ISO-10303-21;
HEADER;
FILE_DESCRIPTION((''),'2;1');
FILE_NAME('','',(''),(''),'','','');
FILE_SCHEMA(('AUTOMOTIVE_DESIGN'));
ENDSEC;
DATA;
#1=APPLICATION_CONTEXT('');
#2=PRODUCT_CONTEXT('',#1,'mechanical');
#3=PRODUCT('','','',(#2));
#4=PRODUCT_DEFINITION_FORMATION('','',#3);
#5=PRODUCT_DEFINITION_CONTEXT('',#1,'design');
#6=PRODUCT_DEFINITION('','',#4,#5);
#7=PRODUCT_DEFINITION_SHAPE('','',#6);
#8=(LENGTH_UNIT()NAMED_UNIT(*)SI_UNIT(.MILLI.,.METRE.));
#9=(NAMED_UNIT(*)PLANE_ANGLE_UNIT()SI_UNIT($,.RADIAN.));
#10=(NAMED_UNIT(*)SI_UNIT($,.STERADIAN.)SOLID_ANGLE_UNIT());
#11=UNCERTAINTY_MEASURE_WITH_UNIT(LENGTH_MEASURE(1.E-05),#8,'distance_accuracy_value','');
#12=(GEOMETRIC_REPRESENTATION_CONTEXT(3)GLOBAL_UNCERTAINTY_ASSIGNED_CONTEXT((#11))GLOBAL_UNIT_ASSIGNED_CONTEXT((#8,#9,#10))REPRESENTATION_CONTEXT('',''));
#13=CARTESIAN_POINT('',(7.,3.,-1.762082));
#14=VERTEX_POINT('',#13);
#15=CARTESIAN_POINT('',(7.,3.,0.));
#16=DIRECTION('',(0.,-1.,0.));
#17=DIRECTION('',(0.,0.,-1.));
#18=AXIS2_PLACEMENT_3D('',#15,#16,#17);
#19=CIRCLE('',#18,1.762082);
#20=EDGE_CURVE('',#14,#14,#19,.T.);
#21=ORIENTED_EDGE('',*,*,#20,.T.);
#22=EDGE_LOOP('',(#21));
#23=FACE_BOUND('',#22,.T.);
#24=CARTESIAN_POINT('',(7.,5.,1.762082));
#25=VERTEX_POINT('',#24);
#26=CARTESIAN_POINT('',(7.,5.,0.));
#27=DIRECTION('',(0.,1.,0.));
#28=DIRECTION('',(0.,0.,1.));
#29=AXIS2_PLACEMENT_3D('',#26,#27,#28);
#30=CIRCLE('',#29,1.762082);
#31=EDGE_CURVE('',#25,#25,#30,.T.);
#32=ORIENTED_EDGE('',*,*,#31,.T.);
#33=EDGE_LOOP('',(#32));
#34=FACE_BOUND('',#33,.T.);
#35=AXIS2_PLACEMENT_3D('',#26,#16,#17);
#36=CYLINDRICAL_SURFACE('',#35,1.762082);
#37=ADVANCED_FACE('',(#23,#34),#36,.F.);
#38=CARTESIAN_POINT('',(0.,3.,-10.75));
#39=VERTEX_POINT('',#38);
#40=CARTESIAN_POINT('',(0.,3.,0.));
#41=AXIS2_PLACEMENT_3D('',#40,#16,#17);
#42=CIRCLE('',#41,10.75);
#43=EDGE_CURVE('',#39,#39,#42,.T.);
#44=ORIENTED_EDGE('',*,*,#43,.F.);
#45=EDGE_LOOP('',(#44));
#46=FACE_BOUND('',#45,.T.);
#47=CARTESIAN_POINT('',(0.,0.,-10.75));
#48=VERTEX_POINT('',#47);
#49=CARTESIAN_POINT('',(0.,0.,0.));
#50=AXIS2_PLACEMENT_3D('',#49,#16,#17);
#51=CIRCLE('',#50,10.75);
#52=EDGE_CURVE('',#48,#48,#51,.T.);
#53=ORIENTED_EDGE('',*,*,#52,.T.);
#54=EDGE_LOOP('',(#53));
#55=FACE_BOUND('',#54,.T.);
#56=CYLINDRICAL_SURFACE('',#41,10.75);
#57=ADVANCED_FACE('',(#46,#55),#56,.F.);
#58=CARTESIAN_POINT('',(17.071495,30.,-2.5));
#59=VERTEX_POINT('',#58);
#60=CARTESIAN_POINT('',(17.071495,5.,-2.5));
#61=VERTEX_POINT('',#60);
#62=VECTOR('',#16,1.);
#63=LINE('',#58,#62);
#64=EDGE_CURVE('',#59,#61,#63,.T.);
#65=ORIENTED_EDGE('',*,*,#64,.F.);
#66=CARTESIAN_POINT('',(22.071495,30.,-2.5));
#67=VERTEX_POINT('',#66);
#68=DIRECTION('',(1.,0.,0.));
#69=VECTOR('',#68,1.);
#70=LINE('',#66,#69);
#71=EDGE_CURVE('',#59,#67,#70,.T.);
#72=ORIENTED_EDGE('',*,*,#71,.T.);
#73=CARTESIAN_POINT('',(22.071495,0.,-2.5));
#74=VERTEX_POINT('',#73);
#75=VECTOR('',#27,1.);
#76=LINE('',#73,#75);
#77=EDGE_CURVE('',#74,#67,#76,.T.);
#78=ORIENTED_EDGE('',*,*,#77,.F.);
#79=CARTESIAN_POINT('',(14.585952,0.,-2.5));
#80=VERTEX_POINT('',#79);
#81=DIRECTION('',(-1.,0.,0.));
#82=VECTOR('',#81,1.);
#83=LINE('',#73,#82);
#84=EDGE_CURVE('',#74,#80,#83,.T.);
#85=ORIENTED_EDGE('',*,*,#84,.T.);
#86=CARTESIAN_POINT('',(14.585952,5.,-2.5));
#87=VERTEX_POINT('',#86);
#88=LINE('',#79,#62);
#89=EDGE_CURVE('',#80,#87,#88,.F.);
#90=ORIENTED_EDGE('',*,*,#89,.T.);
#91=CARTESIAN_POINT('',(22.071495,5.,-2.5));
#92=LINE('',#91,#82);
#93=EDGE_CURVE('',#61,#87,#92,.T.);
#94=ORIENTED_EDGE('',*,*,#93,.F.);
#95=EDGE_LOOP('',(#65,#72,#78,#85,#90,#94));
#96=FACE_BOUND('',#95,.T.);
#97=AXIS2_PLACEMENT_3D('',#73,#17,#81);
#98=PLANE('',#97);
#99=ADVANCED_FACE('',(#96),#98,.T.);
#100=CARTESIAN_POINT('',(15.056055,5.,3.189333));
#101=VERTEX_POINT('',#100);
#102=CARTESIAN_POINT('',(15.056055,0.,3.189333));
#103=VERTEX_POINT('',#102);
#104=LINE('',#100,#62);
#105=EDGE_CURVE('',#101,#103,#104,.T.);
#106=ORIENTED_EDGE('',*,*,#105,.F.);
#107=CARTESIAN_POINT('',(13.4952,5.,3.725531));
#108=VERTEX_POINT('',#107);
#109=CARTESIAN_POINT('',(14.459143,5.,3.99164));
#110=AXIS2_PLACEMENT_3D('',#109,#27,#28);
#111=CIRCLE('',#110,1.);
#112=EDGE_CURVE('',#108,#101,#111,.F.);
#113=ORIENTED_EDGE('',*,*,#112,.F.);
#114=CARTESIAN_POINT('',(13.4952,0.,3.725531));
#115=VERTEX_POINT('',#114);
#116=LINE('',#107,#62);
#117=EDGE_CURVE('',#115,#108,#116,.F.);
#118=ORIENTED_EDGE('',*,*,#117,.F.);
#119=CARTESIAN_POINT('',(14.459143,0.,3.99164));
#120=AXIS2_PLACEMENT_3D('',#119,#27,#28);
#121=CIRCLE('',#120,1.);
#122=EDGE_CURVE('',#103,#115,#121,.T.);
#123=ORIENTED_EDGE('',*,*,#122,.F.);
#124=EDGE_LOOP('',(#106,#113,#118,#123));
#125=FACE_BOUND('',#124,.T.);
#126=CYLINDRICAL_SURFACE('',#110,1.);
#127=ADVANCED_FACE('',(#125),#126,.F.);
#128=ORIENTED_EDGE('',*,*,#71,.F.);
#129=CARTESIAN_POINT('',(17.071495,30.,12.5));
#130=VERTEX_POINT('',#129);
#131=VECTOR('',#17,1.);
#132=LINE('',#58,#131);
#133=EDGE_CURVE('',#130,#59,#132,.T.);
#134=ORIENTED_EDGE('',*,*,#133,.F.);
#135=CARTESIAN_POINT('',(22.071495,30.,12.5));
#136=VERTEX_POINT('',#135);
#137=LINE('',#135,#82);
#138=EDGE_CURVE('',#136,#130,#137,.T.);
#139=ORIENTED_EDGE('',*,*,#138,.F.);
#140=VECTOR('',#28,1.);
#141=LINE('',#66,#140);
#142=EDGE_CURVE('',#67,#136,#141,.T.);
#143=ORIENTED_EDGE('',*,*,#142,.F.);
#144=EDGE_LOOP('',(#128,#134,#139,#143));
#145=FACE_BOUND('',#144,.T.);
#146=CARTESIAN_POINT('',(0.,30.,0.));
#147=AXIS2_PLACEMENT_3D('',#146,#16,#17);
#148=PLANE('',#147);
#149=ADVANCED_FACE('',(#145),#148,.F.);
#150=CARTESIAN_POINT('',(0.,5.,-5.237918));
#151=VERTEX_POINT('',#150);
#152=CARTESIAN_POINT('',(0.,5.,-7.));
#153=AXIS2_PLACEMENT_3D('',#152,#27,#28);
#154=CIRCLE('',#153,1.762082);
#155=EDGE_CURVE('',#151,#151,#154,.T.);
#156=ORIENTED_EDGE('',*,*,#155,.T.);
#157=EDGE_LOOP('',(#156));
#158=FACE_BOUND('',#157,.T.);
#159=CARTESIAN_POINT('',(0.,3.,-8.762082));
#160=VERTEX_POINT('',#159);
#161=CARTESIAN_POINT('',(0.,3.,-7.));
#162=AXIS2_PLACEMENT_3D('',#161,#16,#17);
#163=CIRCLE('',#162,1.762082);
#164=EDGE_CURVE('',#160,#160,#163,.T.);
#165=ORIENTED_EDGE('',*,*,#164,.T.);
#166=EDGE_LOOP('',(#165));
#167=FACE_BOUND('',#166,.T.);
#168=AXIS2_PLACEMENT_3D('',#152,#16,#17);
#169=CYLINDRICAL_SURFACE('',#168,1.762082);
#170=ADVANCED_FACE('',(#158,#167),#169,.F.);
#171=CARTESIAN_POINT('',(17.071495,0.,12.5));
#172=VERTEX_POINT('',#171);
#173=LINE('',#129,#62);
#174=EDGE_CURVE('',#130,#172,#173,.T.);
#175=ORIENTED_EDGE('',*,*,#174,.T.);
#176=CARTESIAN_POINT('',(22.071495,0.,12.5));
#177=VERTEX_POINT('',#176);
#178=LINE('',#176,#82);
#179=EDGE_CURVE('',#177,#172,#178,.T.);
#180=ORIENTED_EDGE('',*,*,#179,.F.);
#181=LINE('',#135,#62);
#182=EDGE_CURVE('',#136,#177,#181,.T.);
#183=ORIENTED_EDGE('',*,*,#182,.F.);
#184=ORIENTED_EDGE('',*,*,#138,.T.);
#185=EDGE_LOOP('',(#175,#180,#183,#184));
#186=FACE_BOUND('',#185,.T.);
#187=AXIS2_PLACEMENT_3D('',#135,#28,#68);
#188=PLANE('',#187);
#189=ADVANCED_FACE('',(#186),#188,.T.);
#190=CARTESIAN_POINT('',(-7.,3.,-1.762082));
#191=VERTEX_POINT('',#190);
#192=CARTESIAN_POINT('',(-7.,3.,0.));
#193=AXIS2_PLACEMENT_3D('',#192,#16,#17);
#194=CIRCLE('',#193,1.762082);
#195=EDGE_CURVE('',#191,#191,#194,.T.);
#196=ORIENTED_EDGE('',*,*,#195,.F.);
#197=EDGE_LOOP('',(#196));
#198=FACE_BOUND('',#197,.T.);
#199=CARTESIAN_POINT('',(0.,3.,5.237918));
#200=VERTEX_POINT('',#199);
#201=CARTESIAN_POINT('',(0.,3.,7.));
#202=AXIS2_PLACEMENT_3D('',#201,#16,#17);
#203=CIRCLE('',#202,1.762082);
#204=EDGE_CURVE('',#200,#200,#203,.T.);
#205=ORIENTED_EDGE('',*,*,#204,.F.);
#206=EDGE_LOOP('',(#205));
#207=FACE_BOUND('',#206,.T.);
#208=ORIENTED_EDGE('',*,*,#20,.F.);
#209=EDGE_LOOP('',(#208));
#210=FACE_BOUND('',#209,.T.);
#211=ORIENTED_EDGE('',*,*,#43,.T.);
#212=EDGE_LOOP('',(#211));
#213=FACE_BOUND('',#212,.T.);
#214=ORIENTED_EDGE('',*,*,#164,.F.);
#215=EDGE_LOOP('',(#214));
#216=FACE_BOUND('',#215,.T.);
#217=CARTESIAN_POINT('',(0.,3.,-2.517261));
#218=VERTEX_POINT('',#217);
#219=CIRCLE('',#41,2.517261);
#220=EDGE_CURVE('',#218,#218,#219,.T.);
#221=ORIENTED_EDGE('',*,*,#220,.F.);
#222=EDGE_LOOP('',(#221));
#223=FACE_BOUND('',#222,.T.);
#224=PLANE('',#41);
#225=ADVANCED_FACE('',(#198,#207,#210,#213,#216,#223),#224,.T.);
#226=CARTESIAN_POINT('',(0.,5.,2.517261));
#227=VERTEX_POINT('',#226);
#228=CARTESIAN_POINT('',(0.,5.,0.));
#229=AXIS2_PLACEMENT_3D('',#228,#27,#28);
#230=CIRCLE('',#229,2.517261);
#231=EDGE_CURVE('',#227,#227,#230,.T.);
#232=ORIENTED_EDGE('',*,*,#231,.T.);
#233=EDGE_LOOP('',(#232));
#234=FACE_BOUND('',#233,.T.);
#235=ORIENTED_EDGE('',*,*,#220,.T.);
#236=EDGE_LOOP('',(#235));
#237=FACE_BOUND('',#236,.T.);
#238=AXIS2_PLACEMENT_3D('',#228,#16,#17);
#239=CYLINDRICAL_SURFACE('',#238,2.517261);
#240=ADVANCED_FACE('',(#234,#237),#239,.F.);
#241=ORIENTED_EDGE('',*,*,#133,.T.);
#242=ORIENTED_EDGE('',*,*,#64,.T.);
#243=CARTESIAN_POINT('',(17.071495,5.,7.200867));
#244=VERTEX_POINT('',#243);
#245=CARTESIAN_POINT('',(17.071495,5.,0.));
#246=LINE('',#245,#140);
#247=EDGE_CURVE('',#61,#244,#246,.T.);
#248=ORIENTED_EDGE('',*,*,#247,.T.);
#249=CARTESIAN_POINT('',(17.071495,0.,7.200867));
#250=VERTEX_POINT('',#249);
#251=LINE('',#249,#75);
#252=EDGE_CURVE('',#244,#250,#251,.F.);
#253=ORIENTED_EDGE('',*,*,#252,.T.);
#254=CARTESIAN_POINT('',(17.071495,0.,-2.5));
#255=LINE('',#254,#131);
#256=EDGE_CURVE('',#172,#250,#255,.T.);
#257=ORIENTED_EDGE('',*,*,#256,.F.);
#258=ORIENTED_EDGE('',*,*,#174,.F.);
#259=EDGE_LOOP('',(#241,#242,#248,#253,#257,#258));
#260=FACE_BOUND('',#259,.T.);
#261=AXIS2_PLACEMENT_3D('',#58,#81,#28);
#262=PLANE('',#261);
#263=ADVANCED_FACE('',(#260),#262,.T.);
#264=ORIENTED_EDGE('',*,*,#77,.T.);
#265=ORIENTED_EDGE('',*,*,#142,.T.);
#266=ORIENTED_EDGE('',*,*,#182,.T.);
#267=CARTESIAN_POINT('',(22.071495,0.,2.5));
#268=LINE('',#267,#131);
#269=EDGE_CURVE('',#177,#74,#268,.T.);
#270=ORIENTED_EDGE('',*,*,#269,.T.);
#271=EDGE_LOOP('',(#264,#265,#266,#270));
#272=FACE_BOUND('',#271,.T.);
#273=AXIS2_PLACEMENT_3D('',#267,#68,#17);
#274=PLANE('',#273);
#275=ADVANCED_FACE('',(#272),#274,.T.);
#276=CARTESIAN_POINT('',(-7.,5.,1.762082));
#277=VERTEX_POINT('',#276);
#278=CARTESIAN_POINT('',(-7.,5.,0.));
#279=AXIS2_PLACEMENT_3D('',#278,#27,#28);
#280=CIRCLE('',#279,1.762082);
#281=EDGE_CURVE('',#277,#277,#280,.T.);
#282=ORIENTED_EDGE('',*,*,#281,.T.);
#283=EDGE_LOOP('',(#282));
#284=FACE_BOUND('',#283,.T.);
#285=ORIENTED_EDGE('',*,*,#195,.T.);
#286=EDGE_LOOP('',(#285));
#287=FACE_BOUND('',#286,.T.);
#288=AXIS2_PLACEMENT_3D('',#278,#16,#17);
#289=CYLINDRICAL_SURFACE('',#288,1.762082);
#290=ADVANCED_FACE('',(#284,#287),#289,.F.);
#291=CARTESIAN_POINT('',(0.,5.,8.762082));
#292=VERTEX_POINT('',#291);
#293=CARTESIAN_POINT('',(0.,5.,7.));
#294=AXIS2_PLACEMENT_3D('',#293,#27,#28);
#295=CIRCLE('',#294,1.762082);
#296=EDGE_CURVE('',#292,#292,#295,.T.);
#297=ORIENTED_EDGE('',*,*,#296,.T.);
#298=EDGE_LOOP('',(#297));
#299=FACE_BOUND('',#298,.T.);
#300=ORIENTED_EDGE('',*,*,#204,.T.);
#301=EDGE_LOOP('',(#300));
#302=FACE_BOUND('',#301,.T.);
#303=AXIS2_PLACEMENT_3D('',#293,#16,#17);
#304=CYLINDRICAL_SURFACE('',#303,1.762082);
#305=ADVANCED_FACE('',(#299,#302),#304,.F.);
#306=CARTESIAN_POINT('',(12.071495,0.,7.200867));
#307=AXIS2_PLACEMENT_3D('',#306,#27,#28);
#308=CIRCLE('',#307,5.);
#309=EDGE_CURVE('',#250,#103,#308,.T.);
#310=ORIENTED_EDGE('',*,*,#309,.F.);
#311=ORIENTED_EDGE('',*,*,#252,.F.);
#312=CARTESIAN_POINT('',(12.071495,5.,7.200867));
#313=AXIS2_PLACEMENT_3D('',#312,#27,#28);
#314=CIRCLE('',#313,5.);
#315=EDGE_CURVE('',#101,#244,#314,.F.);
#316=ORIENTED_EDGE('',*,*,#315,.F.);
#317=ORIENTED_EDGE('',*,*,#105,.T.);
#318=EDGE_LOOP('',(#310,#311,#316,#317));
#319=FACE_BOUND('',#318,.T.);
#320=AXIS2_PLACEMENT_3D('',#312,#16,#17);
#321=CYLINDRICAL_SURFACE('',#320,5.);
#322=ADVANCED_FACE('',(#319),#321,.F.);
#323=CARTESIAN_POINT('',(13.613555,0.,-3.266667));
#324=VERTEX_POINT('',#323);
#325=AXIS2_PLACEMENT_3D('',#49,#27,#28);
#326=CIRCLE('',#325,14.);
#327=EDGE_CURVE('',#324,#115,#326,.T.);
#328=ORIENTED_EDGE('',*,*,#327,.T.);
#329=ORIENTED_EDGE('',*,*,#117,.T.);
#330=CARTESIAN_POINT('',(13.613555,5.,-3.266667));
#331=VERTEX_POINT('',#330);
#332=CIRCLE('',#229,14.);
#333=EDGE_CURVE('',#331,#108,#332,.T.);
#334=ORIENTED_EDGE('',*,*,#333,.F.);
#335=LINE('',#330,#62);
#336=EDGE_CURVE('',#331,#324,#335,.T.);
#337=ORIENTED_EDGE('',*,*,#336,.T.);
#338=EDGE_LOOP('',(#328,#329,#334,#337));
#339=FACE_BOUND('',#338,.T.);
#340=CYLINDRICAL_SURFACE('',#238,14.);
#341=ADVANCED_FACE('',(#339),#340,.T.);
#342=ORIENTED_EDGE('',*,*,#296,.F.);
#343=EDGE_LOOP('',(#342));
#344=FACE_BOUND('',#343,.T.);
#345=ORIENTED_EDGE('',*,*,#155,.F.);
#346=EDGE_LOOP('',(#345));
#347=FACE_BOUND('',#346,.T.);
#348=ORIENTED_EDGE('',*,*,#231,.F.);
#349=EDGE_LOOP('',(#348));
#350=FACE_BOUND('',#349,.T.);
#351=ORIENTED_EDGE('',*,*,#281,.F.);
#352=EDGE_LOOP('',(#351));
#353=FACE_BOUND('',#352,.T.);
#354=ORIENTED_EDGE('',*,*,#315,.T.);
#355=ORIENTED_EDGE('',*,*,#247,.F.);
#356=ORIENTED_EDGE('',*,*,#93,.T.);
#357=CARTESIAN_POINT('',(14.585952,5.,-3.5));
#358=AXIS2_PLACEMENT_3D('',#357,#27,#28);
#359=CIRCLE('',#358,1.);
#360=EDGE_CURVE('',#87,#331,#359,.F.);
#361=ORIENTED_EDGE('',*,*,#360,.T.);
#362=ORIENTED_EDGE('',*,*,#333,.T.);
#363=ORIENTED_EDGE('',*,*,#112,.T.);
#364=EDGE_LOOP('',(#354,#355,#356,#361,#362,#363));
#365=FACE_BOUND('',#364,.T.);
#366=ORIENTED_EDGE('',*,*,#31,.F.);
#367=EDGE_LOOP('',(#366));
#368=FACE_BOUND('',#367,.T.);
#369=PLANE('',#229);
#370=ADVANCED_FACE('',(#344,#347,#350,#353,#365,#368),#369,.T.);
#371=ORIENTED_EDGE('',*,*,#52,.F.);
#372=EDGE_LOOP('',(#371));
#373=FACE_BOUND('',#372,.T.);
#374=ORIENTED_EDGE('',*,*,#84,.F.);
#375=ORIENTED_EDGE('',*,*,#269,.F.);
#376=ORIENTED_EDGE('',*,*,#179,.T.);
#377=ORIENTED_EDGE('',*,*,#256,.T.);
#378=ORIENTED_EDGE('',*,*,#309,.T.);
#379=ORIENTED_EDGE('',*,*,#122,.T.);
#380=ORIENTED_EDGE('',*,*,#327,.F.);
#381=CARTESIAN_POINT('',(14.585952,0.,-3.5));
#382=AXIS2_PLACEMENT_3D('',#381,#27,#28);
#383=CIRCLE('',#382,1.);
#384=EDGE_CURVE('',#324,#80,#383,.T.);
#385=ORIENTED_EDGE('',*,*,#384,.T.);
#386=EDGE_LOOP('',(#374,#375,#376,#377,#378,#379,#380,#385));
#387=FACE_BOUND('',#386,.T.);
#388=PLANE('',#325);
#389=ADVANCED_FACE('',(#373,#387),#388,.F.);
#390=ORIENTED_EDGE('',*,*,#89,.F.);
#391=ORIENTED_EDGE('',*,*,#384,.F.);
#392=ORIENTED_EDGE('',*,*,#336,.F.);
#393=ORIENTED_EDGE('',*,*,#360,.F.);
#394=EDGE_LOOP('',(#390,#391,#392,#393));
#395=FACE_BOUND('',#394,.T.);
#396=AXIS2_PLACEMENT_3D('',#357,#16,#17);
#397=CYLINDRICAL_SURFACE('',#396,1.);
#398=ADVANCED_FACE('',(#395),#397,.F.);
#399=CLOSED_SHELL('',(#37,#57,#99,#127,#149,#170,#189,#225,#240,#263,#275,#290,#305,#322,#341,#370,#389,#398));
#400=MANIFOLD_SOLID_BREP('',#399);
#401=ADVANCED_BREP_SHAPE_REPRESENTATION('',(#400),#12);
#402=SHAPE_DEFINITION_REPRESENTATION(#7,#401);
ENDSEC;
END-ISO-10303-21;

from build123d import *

# Parameters (mm, degrees)
SKETCH1_R           = 14
SKETCH1_R_2         = 2.517260593
SKETCH1_R_3         = 1.762082415
BOSS_EXTRUDE1_DEPTH = 5
SKETCH4_W           = 12
SKETCH4_H           = 5
BOSS_EXTRUDE4_DEPTH = 5
SKETCH6_W           = 5
SKETCH6_H           = 15
BOSS_EXTRUDE5_DEPTH = 30
SKETCH8_R           = 10.75
CUT_EXTRUDE2_DEPTH  = 3
FILLET1_R           = 5
FILLET2_R           = 1


with BuildPart() as part:
    # Sketch1 → Boss-Extrude1 (new body)
    with BuildSketch(Plane(origin=(0, 0, 0), x_dir=(1, 0, 0), z_dir=(0, 1, 0))):
        with Locations(Location((0, 0, 0), (0, 0, 270))):
            Circle(SKETCH1_R)
        with Locations(Location((0, 0, 0), (0, 0, 270))):
            Circle(SKETCH1_R_2, mode=Mode.SUBTRACT)
        with Locations(Location((0, 7, 0), (0, 0, 270))):
            Circle(SKETCH1_R_3, mode=Mode.SUBTRACT)
        with Locations(Location((7, 0, 0), (0, 0, 270))):
            Circle(SKETCH1_R_3, mode=Mode.SUBTRACT)
        with Locations(Location((0, -7, 0), (0, 0, 270))):
            Circle(SKETCH1_R_3, mode=Mode.SUBTRACT)
        with Locations(Location((-7, 0, 0), (0, 0, 270))):
            Circle(SKETCH1_R_3, mode=Mode.SUBTRACT)
    extrude(amount=BOSS_EXTRUDE1_DEPTH)

    # Sketch4 → Boss-Extrude4 (add)
    with BuildSketch(Plane(origin=(0, 5, 0), x_dir=(1, 0, 0), z_dir=(0, 1, 0))):
        with Locations((16.071494653, 0)):
            Rectangle(SKETCH4_W, SKETCH4_H)
    extrude(amount=-BOSS_EXTRUDE4_DEPTH)

    # Sketch6 → Boss-Extrude5 (add)
    with BuildSketch(Plane.XZ):
        with Locations((19.571494653, 5)):
            Rectangle(SKETCH6_W, SKETCH6_H)
    extrude(amount=-BOSS_EXTRUDE5_DEPTH)

    # Sketch8 → Cut-Extrude2 (cut)
    with BuildSketch(Plane.XZ):
        with Locations(Location((0, 0, 0), (0, 0, 270))):
            Circle(SKETCH8_R)
    extrude(amount=-CUT_EXTRUDE2_DEPTH, mode=Mode.SUBTRACT)

    # Fillet1
    # the kernel refuses this fillet: 5 mm, written as the material it adds along each edge
    with BuildSketch(Plane(origin=(17.071494653, 5, 2.5), x_dir=(-1, 0, 0), z_dir=(0, -1, 0))) as fillet1_piece_1:
        with BuildLine():
            CenterArc((5, -4.700866603), FILLET1_R, 109.919316249, 70.080683751)
            Line((0, -4.700866603), (-0.1, -4.700866603))
            Line((-0.1, -4.700866603), (-0.1, 0))
            Line((-0.1, 0), (0, 0.1))
            ThreePointArc((0, 0.1), (1.648258669, 0.1), (3.262447686, 0.094017332))
            Line((3.262447686, 0.094017332), (3.296517339, 0))
        make_face()
    extrude(amount=5)

    # Fillet2
    fillet2_edges = [part.edges().sort_by_distance(p)[0] for p in [
        (13.774977314, 2.5, 2.5),
        (13.774977314, 2.5, -2.5),
    ]]
    fillet(fillet2_edges, radius=FILLET2_R)


solid = part.part
